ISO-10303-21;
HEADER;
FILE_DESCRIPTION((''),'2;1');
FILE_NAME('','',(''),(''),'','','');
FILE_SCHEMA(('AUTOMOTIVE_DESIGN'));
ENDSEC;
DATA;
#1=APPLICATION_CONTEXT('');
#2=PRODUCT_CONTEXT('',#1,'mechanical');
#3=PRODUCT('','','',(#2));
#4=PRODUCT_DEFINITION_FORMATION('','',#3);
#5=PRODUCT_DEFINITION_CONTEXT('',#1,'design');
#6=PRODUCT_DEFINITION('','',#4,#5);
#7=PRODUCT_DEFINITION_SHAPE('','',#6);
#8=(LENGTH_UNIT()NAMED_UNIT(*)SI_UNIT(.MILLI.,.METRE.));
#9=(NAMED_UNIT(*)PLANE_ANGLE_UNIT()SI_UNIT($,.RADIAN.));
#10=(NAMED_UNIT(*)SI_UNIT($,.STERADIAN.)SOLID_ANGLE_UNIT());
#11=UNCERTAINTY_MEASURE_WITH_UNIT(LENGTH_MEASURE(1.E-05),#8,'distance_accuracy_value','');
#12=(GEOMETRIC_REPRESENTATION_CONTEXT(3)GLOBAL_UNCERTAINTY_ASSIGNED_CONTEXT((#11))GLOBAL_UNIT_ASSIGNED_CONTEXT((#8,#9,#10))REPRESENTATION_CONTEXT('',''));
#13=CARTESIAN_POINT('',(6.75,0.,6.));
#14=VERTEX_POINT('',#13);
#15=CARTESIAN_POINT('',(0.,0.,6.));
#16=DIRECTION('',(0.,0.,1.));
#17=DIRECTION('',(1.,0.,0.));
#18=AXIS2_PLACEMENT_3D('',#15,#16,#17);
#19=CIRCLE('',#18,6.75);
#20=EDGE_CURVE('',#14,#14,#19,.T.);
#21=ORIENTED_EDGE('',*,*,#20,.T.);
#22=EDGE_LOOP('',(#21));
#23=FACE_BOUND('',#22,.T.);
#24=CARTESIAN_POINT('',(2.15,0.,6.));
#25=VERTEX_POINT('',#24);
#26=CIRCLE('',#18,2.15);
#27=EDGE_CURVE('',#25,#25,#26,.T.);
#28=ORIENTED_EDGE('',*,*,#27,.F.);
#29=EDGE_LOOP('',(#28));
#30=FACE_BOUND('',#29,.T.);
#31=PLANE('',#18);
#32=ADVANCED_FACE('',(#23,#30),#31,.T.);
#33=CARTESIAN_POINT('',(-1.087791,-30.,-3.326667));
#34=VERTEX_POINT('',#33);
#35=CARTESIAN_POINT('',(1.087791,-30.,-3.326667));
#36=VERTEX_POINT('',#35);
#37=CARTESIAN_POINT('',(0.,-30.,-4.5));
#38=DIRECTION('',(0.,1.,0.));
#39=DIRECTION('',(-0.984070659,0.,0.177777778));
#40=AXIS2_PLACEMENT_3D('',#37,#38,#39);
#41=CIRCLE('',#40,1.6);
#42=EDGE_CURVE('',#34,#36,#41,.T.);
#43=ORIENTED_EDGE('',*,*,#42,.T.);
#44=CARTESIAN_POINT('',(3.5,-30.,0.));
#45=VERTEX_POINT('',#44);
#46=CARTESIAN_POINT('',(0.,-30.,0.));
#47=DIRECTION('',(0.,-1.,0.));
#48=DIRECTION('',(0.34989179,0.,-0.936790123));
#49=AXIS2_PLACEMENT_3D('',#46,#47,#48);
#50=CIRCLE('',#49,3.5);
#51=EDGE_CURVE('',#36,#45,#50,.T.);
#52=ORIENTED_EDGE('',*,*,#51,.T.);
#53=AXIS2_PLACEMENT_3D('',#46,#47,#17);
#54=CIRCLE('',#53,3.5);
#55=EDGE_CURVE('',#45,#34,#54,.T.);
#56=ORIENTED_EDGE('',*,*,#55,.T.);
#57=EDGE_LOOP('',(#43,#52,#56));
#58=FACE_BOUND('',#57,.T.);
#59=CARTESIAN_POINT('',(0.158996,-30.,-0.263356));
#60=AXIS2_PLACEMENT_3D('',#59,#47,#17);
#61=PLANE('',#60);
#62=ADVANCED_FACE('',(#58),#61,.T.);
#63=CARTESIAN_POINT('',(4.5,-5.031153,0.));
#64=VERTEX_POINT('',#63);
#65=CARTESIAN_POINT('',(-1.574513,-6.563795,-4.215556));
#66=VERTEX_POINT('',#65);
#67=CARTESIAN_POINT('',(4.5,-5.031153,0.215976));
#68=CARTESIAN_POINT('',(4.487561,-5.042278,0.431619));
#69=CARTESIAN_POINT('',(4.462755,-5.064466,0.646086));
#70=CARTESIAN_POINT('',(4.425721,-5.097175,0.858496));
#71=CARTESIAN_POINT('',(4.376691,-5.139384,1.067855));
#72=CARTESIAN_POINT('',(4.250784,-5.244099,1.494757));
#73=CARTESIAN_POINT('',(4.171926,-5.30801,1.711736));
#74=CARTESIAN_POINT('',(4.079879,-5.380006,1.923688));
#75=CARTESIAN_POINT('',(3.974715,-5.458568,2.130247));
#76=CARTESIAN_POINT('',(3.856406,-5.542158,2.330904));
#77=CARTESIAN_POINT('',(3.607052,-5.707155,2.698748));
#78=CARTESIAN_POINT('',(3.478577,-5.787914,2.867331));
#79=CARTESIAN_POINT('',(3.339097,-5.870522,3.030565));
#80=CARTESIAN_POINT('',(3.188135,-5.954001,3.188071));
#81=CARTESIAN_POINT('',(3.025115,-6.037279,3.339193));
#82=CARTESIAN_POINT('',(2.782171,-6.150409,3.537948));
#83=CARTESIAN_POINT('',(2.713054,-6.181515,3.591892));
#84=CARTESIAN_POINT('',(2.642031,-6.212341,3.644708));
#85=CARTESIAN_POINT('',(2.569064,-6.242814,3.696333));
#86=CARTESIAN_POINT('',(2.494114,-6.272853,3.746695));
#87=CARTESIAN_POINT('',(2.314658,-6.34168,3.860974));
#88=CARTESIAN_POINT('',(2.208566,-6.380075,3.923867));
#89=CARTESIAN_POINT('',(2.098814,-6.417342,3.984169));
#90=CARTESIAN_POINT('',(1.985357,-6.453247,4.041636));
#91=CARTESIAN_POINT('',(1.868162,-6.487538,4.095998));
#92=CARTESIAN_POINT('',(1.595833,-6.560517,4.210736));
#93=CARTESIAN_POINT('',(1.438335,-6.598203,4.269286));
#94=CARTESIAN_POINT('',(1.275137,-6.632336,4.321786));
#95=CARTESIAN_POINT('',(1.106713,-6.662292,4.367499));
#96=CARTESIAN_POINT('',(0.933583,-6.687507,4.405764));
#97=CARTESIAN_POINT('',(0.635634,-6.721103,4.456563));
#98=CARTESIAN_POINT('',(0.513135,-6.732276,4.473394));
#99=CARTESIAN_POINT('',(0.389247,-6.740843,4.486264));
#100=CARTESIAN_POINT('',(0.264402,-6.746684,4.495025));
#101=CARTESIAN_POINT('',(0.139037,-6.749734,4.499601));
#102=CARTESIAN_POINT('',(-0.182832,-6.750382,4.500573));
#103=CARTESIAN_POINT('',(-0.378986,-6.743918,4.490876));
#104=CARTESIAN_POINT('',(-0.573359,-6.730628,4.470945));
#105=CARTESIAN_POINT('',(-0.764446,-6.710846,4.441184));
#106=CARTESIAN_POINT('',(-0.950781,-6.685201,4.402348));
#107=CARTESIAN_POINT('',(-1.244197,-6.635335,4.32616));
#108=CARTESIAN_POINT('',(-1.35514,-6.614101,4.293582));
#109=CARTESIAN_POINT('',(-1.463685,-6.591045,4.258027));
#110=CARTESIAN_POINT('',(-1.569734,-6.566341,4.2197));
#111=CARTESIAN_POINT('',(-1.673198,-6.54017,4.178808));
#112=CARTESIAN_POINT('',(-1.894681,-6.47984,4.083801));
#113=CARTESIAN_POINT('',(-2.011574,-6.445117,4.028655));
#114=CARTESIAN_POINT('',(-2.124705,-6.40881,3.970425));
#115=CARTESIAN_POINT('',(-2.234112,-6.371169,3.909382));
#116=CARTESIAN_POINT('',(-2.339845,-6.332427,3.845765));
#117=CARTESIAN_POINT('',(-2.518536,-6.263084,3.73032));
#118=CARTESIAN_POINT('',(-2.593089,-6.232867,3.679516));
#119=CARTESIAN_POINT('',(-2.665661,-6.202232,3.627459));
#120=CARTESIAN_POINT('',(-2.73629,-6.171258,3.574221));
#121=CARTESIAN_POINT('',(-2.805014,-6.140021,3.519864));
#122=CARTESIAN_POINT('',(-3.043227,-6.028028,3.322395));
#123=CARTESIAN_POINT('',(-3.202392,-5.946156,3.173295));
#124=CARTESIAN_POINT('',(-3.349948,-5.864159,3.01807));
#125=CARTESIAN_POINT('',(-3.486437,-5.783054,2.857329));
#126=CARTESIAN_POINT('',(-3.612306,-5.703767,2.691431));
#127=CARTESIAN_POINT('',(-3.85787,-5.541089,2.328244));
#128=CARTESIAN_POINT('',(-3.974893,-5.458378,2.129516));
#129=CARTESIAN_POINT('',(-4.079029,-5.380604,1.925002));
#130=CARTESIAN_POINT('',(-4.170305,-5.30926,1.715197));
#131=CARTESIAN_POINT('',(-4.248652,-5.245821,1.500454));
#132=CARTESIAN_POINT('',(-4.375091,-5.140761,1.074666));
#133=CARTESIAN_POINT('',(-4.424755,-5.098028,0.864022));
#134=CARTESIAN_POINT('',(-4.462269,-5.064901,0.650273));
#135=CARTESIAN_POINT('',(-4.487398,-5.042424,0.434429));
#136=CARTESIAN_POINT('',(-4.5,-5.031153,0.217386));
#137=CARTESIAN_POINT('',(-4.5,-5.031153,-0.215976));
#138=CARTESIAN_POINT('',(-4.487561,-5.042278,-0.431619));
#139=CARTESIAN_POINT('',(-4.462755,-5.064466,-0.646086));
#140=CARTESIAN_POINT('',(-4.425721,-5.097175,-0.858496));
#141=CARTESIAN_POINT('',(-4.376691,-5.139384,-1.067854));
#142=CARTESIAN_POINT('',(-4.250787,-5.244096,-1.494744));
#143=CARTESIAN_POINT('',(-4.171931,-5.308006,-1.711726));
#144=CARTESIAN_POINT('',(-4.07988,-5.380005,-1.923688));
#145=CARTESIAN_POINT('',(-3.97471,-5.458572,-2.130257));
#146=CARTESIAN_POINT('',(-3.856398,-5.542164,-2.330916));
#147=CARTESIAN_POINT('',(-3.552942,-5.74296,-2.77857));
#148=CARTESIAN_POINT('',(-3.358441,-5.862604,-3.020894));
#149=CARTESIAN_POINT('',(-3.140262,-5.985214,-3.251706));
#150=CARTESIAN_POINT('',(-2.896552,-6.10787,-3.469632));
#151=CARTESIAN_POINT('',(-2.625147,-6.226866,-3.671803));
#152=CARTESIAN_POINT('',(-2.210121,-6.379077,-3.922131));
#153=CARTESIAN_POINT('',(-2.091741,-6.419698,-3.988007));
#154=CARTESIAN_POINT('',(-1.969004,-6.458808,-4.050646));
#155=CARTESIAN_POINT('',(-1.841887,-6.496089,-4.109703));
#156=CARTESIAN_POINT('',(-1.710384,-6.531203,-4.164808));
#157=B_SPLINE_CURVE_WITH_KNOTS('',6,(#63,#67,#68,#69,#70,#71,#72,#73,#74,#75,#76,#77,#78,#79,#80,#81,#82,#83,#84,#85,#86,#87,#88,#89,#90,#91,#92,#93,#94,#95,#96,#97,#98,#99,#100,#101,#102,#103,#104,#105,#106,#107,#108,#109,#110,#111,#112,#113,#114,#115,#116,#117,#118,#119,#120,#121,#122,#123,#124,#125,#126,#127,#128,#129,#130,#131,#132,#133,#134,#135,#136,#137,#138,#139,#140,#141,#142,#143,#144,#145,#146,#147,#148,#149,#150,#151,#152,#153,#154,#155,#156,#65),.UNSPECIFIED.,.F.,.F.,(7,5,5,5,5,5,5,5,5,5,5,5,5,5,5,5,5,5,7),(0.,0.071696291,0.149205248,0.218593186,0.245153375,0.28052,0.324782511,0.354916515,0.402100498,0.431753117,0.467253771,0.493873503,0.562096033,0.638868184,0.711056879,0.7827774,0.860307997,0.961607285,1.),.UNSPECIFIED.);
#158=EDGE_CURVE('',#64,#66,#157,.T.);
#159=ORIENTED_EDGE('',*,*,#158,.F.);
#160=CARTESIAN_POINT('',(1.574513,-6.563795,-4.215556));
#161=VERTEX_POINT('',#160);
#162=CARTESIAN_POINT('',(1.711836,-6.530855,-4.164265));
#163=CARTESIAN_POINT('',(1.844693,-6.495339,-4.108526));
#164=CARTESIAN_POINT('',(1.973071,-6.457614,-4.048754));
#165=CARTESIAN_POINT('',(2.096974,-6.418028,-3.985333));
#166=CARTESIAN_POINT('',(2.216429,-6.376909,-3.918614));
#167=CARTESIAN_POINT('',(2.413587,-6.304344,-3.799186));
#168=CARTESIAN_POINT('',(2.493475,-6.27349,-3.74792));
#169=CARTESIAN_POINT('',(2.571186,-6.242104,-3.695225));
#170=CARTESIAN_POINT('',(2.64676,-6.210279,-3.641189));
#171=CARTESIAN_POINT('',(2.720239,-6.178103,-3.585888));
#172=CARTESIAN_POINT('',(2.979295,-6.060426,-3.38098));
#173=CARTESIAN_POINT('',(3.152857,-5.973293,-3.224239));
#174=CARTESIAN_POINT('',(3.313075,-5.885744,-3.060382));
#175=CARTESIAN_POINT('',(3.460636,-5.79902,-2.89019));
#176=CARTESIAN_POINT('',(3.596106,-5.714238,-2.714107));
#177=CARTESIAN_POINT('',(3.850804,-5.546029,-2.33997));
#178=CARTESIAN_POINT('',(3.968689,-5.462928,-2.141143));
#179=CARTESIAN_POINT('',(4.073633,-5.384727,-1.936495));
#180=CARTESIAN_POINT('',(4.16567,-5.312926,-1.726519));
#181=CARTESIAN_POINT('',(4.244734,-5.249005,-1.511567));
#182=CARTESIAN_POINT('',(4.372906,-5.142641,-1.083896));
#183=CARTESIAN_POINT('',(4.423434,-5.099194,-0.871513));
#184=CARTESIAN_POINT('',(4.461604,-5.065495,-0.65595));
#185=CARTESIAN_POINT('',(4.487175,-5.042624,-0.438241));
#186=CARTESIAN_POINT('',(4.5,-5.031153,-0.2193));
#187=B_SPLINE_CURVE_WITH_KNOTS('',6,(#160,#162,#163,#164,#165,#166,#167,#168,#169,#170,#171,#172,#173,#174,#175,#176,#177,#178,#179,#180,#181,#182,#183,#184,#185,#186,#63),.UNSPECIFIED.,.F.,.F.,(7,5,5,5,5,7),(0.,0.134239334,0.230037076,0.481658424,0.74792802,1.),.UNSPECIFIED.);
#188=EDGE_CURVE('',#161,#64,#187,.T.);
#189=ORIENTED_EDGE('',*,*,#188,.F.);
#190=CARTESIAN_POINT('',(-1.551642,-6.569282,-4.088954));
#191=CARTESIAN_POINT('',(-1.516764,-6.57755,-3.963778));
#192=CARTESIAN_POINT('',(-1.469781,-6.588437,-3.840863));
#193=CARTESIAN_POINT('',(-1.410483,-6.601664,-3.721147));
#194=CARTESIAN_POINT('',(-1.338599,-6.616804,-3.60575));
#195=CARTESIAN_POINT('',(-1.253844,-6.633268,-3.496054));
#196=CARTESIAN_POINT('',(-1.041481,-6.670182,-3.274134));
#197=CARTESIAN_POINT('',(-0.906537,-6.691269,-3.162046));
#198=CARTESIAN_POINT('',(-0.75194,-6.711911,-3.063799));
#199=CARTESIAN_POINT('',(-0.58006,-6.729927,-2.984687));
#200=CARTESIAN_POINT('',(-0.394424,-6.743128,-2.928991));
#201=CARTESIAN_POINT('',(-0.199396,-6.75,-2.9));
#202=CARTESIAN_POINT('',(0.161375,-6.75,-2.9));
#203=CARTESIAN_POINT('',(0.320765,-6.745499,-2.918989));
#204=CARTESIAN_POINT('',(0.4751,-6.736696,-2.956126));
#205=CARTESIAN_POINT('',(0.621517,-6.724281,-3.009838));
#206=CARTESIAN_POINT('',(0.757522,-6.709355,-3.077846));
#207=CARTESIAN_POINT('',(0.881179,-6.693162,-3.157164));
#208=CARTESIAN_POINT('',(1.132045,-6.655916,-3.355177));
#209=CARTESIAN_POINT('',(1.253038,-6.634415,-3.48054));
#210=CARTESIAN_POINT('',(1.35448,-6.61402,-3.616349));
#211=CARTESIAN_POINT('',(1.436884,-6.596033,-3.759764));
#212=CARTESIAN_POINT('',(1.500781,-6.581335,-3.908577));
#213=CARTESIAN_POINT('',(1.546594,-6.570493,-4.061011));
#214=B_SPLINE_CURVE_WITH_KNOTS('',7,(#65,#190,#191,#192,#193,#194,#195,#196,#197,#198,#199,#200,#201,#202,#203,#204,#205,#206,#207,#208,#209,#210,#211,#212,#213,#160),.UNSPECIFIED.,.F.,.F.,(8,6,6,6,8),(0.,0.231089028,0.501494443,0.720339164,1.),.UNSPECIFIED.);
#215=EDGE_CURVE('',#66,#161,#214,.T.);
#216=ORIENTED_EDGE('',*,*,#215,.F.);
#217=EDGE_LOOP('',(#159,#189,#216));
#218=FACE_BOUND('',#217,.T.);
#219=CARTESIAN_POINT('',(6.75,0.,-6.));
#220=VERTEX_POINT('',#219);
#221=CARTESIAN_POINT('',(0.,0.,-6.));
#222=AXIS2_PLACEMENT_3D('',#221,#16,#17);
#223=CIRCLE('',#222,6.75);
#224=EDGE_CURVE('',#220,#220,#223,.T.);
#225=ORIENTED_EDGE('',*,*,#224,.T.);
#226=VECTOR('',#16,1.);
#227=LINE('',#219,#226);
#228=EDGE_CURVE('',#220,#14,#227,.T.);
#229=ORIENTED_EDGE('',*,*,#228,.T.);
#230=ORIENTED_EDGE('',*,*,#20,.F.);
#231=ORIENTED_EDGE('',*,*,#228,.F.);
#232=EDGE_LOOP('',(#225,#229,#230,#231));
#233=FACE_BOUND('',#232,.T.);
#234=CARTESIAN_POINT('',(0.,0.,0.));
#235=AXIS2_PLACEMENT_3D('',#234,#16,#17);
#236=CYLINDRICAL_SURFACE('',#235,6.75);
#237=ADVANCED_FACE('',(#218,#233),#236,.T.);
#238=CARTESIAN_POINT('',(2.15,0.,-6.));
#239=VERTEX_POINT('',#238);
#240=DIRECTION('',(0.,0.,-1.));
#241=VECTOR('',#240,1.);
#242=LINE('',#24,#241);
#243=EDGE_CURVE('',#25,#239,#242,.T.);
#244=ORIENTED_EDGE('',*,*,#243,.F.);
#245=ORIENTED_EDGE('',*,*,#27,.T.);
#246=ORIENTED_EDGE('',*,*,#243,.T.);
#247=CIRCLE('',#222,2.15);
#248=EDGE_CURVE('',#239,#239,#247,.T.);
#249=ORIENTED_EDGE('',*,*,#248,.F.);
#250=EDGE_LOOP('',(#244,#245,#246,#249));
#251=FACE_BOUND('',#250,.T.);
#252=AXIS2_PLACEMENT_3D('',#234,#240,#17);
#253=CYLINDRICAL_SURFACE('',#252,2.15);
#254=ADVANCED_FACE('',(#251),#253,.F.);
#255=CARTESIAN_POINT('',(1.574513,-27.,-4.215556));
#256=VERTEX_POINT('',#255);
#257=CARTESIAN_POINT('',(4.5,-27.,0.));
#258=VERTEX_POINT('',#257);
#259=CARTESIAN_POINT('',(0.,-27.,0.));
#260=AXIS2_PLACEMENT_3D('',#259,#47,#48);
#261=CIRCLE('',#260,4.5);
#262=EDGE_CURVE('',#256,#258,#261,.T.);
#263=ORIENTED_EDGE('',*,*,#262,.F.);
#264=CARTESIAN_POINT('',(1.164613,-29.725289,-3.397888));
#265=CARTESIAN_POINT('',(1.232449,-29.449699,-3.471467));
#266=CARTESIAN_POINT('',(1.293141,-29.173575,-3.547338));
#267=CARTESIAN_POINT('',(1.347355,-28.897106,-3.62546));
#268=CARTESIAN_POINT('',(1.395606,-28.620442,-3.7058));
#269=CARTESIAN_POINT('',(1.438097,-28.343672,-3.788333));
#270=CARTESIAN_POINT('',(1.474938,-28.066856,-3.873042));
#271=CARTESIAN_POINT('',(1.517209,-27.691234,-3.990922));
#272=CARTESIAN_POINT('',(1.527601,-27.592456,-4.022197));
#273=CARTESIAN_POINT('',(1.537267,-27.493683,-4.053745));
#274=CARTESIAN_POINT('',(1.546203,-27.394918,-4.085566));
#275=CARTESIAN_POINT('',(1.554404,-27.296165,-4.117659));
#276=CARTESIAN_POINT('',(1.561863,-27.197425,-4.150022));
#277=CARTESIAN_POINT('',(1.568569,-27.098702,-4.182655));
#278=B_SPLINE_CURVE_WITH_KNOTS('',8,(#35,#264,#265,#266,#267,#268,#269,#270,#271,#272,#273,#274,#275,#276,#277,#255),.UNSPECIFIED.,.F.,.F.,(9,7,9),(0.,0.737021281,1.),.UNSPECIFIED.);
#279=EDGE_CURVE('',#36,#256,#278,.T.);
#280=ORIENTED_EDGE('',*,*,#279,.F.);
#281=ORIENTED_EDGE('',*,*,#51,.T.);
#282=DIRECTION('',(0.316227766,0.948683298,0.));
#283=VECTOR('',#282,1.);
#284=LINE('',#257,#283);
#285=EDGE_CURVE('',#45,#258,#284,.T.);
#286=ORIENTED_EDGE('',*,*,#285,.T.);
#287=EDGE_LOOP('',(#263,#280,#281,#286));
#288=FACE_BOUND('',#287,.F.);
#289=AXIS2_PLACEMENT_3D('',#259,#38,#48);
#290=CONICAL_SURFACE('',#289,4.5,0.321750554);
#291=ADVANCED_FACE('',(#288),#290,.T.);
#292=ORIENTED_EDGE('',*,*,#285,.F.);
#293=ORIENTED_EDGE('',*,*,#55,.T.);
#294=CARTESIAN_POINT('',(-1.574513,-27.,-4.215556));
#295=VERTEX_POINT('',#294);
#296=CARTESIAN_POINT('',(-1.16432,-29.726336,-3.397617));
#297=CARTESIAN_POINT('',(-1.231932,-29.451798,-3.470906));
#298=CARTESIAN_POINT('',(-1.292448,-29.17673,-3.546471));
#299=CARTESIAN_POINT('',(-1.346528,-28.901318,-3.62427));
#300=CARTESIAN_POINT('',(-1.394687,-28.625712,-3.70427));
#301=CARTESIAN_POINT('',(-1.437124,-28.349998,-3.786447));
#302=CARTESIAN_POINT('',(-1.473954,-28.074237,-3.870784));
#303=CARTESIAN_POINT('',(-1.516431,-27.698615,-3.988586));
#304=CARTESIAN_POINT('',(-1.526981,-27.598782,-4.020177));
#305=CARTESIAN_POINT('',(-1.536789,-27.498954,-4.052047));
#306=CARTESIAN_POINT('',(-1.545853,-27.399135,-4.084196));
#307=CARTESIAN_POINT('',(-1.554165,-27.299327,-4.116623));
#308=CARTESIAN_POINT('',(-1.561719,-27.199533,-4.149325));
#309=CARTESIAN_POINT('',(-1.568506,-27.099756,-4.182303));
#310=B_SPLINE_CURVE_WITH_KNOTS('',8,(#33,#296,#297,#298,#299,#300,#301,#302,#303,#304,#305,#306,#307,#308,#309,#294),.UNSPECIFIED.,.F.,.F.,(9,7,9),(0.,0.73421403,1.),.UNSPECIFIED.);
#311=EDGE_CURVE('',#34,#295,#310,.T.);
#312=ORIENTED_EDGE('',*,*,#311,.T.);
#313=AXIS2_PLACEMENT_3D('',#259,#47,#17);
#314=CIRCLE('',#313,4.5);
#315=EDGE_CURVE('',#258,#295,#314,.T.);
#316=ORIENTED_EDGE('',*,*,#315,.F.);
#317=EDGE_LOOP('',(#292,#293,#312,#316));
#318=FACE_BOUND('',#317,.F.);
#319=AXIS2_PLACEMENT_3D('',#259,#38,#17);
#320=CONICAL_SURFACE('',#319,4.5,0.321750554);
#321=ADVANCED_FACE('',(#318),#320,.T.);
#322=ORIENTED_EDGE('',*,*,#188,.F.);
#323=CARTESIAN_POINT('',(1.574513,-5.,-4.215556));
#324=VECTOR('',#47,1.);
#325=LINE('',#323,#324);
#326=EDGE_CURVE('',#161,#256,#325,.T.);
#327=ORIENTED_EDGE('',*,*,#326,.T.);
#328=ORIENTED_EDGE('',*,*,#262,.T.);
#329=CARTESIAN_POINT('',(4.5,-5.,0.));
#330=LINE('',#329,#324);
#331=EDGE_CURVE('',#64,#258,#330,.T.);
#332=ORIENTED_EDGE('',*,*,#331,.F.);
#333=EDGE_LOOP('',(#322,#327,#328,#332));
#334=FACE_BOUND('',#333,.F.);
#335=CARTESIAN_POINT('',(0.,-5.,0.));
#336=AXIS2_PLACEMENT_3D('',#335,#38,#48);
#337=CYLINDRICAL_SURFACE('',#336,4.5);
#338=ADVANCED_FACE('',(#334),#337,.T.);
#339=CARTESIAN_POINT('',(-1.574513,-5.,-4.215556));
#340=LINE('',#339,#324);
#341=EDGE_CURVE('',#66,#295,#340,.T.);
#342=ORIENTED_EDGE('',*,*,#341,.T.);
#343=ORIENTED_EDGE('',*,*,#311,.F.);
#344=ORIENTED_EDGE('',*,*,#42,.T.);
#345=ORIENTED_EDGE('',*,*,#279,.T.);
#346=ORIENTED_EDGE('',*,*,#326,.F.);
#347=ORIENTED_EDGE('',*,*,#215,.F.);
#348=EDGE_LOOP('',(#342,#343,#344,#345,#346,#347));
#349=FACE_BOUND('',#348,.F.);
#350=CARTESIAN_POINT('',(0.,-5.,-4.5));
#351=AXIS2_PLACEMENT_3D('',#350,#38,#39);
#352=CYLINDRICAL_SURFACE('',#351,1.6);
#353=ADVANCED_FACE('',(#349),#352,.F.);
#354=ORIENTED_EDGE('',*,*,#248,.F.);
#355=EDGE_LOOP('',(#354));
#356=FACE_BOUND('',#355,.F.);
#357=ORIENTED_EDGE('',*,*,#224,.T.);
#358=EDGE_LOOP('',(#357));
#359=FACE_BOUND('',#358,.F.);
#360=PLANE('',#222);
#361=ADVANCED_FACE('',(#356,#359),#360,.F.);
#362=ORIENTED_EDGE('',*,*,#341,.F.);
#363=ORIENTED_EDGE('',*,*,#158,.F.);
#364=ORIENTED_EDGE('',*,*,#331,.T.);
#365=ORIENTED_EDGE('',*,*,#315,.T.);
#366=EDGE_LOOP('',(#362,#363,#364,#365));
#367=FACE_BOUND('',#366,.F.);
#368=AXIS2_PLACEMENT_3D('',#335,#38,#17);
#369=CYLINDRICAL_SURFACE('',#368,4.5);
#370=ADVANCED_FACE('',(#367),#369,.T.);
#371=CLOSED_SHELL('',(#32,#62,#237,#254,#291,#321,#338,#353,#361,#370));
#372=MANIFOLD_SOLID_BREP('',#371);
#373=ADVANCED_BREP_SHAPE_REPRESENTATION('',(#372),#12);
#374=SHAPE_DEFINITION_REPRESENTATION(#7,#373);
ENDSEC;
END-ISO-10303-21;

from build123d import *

# Parameters (mm, degrees)
F0_R          = 6.75
F0_R_2        = 2.15
F1_DEPTH      = 6
F1_DEPTH_BACK = 6
F3_START      = 5
F3_DEPTH      = 25
F4_SIZE2      = 3
F4_SIZE       = 1


with BuildPart() as f1:
    # F0 (on Top) → F1 (new body, two sides)
    with BuildSketch(Plane.XY) as f1_sk:
        Circle(F0_R)
        Circle(F0_R_2, mode=Mode.SUBTRACT)
    extrude(amount=F1_DEPTH)
    extrude(f1_sk.sketch, amount=-F1_DEPTH_BACK)

    # F2 (on Front) → F3 (join)
    with BuildSketch(Plane.XZ.offset(F3_START)):
        with BuildLine():
            ThreePointArc((1.5745130543, -4.2155555556), (3.6969790873, -2.5656082374), (4.5, 0))
            ThreePointArc((4.5, 0), (-2.5656082374, 3.6969790873), (-1.5745130543, -4.2155555556))
            ThreePointArc((-1.5745130543, -4.2155555556), (0, -2.9), (1.5745130543, -4.2155555556))
        make_face()
    extrude(amount=F3_DEPTH)

    # F4
    f4_edges = [f1.edges().sort_by_distance(p)[0] for p in [
        (0, -30, 4.5),
    ]]
    f4_side = f1.faces().sort_by_distance((0, -30, 0.234076))[0]
    chamfer(f4_edges, length=F4_SIZE, length2=F4_SIZE2, reference=f4_side)


solid = f1.part
